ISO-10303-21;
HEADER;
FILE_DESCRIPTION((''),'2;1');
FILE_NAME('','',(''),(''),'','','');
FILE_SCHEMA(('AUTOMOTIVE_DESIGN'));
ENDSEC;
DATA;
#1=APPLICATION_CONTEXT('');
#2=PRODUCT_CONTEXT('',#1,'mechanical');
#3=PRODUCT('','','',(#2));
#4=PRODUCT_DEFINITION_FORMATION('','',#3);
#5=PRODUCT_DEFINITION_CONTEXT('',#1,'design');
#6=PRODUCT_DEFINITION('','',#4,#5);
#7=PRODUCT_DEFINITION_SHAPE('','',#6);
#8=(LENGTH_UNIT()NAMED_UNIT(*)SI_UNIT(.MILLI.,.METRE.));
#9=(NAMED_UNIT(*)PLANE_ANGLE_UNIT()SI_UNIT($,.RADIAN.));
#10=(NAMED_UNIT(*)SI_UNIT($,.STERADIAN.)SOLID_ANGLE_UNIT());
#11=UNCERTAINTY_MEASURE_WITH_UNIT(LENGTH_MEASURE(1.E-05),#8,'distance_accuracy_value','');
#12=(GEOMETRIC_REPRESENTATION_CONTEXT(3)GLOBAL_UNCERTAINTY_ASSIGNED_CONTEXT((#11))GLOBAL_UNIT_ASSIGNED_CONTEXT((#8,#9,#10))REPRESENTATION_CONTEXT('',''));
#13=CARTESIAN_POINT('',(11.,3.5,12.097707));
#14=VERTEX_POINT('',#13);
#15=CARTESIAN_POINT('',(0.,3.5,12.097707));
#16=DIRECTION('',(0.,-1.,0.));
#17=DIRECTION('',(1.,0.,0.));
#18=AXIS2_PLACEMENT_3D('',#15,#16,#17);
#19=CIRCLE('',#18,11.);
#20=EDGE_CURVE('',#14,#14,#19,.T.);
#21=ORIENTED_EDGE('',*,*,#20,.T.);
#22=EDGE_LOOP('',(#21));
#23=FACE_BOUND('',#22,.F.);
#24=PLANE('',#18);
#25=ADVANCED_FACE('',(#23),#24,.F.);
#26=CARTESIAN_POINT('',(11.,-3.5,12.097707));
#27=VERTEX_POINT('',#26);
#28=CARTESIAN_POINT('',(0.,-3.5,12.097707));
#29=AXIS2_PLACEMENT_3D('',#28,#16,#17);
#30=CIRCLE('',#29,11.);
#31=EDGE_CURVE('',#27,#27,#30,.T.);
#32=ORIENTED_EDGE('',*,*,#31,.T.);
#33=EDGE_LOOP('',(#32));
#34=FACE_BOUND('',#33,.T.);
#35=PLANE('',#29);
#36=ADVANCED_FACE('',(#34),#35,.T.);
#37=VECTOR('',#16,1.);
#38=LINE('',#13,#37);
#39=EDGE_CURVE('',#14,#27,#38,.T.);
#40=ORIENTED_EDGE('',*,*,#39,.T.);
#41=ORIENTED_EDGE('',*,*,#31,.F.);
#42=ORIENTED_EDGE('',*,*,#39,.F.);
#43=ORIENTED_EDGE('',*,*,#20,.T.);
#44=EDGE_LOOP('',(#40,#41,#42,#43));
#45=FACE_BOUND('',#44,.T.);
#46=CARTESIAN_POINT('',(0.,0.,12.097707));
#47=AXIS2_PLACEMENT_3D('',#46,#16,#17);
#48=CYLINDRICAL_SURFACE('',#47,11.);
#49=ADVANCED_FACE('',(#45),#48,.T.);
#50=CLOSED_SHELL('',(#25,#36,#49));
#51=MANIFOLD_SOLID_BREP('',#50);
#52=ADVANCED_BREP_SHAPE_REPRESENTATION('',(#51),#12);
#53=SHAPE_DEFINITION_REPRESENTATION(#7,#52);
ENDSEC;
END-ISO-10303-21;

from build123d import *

# Parameters (mm, degrees)
F5_R      = 11
F13_DEPTH = 3.5


# Not quite as in the source:
# - a feature of the source that left no trace in its solid (it failed there, or was rolled back) is left out


with BuildPart() as f13:
    # F5 (on Front) → F13 (new body, symmetric)
    with BuildSketch(Plane.XZ):
        with Locations((0, 12.0977070183)):
            Circle(F5_R)
    extrude(amount=F13_DEPTH, both=True)


solid = f13.part
